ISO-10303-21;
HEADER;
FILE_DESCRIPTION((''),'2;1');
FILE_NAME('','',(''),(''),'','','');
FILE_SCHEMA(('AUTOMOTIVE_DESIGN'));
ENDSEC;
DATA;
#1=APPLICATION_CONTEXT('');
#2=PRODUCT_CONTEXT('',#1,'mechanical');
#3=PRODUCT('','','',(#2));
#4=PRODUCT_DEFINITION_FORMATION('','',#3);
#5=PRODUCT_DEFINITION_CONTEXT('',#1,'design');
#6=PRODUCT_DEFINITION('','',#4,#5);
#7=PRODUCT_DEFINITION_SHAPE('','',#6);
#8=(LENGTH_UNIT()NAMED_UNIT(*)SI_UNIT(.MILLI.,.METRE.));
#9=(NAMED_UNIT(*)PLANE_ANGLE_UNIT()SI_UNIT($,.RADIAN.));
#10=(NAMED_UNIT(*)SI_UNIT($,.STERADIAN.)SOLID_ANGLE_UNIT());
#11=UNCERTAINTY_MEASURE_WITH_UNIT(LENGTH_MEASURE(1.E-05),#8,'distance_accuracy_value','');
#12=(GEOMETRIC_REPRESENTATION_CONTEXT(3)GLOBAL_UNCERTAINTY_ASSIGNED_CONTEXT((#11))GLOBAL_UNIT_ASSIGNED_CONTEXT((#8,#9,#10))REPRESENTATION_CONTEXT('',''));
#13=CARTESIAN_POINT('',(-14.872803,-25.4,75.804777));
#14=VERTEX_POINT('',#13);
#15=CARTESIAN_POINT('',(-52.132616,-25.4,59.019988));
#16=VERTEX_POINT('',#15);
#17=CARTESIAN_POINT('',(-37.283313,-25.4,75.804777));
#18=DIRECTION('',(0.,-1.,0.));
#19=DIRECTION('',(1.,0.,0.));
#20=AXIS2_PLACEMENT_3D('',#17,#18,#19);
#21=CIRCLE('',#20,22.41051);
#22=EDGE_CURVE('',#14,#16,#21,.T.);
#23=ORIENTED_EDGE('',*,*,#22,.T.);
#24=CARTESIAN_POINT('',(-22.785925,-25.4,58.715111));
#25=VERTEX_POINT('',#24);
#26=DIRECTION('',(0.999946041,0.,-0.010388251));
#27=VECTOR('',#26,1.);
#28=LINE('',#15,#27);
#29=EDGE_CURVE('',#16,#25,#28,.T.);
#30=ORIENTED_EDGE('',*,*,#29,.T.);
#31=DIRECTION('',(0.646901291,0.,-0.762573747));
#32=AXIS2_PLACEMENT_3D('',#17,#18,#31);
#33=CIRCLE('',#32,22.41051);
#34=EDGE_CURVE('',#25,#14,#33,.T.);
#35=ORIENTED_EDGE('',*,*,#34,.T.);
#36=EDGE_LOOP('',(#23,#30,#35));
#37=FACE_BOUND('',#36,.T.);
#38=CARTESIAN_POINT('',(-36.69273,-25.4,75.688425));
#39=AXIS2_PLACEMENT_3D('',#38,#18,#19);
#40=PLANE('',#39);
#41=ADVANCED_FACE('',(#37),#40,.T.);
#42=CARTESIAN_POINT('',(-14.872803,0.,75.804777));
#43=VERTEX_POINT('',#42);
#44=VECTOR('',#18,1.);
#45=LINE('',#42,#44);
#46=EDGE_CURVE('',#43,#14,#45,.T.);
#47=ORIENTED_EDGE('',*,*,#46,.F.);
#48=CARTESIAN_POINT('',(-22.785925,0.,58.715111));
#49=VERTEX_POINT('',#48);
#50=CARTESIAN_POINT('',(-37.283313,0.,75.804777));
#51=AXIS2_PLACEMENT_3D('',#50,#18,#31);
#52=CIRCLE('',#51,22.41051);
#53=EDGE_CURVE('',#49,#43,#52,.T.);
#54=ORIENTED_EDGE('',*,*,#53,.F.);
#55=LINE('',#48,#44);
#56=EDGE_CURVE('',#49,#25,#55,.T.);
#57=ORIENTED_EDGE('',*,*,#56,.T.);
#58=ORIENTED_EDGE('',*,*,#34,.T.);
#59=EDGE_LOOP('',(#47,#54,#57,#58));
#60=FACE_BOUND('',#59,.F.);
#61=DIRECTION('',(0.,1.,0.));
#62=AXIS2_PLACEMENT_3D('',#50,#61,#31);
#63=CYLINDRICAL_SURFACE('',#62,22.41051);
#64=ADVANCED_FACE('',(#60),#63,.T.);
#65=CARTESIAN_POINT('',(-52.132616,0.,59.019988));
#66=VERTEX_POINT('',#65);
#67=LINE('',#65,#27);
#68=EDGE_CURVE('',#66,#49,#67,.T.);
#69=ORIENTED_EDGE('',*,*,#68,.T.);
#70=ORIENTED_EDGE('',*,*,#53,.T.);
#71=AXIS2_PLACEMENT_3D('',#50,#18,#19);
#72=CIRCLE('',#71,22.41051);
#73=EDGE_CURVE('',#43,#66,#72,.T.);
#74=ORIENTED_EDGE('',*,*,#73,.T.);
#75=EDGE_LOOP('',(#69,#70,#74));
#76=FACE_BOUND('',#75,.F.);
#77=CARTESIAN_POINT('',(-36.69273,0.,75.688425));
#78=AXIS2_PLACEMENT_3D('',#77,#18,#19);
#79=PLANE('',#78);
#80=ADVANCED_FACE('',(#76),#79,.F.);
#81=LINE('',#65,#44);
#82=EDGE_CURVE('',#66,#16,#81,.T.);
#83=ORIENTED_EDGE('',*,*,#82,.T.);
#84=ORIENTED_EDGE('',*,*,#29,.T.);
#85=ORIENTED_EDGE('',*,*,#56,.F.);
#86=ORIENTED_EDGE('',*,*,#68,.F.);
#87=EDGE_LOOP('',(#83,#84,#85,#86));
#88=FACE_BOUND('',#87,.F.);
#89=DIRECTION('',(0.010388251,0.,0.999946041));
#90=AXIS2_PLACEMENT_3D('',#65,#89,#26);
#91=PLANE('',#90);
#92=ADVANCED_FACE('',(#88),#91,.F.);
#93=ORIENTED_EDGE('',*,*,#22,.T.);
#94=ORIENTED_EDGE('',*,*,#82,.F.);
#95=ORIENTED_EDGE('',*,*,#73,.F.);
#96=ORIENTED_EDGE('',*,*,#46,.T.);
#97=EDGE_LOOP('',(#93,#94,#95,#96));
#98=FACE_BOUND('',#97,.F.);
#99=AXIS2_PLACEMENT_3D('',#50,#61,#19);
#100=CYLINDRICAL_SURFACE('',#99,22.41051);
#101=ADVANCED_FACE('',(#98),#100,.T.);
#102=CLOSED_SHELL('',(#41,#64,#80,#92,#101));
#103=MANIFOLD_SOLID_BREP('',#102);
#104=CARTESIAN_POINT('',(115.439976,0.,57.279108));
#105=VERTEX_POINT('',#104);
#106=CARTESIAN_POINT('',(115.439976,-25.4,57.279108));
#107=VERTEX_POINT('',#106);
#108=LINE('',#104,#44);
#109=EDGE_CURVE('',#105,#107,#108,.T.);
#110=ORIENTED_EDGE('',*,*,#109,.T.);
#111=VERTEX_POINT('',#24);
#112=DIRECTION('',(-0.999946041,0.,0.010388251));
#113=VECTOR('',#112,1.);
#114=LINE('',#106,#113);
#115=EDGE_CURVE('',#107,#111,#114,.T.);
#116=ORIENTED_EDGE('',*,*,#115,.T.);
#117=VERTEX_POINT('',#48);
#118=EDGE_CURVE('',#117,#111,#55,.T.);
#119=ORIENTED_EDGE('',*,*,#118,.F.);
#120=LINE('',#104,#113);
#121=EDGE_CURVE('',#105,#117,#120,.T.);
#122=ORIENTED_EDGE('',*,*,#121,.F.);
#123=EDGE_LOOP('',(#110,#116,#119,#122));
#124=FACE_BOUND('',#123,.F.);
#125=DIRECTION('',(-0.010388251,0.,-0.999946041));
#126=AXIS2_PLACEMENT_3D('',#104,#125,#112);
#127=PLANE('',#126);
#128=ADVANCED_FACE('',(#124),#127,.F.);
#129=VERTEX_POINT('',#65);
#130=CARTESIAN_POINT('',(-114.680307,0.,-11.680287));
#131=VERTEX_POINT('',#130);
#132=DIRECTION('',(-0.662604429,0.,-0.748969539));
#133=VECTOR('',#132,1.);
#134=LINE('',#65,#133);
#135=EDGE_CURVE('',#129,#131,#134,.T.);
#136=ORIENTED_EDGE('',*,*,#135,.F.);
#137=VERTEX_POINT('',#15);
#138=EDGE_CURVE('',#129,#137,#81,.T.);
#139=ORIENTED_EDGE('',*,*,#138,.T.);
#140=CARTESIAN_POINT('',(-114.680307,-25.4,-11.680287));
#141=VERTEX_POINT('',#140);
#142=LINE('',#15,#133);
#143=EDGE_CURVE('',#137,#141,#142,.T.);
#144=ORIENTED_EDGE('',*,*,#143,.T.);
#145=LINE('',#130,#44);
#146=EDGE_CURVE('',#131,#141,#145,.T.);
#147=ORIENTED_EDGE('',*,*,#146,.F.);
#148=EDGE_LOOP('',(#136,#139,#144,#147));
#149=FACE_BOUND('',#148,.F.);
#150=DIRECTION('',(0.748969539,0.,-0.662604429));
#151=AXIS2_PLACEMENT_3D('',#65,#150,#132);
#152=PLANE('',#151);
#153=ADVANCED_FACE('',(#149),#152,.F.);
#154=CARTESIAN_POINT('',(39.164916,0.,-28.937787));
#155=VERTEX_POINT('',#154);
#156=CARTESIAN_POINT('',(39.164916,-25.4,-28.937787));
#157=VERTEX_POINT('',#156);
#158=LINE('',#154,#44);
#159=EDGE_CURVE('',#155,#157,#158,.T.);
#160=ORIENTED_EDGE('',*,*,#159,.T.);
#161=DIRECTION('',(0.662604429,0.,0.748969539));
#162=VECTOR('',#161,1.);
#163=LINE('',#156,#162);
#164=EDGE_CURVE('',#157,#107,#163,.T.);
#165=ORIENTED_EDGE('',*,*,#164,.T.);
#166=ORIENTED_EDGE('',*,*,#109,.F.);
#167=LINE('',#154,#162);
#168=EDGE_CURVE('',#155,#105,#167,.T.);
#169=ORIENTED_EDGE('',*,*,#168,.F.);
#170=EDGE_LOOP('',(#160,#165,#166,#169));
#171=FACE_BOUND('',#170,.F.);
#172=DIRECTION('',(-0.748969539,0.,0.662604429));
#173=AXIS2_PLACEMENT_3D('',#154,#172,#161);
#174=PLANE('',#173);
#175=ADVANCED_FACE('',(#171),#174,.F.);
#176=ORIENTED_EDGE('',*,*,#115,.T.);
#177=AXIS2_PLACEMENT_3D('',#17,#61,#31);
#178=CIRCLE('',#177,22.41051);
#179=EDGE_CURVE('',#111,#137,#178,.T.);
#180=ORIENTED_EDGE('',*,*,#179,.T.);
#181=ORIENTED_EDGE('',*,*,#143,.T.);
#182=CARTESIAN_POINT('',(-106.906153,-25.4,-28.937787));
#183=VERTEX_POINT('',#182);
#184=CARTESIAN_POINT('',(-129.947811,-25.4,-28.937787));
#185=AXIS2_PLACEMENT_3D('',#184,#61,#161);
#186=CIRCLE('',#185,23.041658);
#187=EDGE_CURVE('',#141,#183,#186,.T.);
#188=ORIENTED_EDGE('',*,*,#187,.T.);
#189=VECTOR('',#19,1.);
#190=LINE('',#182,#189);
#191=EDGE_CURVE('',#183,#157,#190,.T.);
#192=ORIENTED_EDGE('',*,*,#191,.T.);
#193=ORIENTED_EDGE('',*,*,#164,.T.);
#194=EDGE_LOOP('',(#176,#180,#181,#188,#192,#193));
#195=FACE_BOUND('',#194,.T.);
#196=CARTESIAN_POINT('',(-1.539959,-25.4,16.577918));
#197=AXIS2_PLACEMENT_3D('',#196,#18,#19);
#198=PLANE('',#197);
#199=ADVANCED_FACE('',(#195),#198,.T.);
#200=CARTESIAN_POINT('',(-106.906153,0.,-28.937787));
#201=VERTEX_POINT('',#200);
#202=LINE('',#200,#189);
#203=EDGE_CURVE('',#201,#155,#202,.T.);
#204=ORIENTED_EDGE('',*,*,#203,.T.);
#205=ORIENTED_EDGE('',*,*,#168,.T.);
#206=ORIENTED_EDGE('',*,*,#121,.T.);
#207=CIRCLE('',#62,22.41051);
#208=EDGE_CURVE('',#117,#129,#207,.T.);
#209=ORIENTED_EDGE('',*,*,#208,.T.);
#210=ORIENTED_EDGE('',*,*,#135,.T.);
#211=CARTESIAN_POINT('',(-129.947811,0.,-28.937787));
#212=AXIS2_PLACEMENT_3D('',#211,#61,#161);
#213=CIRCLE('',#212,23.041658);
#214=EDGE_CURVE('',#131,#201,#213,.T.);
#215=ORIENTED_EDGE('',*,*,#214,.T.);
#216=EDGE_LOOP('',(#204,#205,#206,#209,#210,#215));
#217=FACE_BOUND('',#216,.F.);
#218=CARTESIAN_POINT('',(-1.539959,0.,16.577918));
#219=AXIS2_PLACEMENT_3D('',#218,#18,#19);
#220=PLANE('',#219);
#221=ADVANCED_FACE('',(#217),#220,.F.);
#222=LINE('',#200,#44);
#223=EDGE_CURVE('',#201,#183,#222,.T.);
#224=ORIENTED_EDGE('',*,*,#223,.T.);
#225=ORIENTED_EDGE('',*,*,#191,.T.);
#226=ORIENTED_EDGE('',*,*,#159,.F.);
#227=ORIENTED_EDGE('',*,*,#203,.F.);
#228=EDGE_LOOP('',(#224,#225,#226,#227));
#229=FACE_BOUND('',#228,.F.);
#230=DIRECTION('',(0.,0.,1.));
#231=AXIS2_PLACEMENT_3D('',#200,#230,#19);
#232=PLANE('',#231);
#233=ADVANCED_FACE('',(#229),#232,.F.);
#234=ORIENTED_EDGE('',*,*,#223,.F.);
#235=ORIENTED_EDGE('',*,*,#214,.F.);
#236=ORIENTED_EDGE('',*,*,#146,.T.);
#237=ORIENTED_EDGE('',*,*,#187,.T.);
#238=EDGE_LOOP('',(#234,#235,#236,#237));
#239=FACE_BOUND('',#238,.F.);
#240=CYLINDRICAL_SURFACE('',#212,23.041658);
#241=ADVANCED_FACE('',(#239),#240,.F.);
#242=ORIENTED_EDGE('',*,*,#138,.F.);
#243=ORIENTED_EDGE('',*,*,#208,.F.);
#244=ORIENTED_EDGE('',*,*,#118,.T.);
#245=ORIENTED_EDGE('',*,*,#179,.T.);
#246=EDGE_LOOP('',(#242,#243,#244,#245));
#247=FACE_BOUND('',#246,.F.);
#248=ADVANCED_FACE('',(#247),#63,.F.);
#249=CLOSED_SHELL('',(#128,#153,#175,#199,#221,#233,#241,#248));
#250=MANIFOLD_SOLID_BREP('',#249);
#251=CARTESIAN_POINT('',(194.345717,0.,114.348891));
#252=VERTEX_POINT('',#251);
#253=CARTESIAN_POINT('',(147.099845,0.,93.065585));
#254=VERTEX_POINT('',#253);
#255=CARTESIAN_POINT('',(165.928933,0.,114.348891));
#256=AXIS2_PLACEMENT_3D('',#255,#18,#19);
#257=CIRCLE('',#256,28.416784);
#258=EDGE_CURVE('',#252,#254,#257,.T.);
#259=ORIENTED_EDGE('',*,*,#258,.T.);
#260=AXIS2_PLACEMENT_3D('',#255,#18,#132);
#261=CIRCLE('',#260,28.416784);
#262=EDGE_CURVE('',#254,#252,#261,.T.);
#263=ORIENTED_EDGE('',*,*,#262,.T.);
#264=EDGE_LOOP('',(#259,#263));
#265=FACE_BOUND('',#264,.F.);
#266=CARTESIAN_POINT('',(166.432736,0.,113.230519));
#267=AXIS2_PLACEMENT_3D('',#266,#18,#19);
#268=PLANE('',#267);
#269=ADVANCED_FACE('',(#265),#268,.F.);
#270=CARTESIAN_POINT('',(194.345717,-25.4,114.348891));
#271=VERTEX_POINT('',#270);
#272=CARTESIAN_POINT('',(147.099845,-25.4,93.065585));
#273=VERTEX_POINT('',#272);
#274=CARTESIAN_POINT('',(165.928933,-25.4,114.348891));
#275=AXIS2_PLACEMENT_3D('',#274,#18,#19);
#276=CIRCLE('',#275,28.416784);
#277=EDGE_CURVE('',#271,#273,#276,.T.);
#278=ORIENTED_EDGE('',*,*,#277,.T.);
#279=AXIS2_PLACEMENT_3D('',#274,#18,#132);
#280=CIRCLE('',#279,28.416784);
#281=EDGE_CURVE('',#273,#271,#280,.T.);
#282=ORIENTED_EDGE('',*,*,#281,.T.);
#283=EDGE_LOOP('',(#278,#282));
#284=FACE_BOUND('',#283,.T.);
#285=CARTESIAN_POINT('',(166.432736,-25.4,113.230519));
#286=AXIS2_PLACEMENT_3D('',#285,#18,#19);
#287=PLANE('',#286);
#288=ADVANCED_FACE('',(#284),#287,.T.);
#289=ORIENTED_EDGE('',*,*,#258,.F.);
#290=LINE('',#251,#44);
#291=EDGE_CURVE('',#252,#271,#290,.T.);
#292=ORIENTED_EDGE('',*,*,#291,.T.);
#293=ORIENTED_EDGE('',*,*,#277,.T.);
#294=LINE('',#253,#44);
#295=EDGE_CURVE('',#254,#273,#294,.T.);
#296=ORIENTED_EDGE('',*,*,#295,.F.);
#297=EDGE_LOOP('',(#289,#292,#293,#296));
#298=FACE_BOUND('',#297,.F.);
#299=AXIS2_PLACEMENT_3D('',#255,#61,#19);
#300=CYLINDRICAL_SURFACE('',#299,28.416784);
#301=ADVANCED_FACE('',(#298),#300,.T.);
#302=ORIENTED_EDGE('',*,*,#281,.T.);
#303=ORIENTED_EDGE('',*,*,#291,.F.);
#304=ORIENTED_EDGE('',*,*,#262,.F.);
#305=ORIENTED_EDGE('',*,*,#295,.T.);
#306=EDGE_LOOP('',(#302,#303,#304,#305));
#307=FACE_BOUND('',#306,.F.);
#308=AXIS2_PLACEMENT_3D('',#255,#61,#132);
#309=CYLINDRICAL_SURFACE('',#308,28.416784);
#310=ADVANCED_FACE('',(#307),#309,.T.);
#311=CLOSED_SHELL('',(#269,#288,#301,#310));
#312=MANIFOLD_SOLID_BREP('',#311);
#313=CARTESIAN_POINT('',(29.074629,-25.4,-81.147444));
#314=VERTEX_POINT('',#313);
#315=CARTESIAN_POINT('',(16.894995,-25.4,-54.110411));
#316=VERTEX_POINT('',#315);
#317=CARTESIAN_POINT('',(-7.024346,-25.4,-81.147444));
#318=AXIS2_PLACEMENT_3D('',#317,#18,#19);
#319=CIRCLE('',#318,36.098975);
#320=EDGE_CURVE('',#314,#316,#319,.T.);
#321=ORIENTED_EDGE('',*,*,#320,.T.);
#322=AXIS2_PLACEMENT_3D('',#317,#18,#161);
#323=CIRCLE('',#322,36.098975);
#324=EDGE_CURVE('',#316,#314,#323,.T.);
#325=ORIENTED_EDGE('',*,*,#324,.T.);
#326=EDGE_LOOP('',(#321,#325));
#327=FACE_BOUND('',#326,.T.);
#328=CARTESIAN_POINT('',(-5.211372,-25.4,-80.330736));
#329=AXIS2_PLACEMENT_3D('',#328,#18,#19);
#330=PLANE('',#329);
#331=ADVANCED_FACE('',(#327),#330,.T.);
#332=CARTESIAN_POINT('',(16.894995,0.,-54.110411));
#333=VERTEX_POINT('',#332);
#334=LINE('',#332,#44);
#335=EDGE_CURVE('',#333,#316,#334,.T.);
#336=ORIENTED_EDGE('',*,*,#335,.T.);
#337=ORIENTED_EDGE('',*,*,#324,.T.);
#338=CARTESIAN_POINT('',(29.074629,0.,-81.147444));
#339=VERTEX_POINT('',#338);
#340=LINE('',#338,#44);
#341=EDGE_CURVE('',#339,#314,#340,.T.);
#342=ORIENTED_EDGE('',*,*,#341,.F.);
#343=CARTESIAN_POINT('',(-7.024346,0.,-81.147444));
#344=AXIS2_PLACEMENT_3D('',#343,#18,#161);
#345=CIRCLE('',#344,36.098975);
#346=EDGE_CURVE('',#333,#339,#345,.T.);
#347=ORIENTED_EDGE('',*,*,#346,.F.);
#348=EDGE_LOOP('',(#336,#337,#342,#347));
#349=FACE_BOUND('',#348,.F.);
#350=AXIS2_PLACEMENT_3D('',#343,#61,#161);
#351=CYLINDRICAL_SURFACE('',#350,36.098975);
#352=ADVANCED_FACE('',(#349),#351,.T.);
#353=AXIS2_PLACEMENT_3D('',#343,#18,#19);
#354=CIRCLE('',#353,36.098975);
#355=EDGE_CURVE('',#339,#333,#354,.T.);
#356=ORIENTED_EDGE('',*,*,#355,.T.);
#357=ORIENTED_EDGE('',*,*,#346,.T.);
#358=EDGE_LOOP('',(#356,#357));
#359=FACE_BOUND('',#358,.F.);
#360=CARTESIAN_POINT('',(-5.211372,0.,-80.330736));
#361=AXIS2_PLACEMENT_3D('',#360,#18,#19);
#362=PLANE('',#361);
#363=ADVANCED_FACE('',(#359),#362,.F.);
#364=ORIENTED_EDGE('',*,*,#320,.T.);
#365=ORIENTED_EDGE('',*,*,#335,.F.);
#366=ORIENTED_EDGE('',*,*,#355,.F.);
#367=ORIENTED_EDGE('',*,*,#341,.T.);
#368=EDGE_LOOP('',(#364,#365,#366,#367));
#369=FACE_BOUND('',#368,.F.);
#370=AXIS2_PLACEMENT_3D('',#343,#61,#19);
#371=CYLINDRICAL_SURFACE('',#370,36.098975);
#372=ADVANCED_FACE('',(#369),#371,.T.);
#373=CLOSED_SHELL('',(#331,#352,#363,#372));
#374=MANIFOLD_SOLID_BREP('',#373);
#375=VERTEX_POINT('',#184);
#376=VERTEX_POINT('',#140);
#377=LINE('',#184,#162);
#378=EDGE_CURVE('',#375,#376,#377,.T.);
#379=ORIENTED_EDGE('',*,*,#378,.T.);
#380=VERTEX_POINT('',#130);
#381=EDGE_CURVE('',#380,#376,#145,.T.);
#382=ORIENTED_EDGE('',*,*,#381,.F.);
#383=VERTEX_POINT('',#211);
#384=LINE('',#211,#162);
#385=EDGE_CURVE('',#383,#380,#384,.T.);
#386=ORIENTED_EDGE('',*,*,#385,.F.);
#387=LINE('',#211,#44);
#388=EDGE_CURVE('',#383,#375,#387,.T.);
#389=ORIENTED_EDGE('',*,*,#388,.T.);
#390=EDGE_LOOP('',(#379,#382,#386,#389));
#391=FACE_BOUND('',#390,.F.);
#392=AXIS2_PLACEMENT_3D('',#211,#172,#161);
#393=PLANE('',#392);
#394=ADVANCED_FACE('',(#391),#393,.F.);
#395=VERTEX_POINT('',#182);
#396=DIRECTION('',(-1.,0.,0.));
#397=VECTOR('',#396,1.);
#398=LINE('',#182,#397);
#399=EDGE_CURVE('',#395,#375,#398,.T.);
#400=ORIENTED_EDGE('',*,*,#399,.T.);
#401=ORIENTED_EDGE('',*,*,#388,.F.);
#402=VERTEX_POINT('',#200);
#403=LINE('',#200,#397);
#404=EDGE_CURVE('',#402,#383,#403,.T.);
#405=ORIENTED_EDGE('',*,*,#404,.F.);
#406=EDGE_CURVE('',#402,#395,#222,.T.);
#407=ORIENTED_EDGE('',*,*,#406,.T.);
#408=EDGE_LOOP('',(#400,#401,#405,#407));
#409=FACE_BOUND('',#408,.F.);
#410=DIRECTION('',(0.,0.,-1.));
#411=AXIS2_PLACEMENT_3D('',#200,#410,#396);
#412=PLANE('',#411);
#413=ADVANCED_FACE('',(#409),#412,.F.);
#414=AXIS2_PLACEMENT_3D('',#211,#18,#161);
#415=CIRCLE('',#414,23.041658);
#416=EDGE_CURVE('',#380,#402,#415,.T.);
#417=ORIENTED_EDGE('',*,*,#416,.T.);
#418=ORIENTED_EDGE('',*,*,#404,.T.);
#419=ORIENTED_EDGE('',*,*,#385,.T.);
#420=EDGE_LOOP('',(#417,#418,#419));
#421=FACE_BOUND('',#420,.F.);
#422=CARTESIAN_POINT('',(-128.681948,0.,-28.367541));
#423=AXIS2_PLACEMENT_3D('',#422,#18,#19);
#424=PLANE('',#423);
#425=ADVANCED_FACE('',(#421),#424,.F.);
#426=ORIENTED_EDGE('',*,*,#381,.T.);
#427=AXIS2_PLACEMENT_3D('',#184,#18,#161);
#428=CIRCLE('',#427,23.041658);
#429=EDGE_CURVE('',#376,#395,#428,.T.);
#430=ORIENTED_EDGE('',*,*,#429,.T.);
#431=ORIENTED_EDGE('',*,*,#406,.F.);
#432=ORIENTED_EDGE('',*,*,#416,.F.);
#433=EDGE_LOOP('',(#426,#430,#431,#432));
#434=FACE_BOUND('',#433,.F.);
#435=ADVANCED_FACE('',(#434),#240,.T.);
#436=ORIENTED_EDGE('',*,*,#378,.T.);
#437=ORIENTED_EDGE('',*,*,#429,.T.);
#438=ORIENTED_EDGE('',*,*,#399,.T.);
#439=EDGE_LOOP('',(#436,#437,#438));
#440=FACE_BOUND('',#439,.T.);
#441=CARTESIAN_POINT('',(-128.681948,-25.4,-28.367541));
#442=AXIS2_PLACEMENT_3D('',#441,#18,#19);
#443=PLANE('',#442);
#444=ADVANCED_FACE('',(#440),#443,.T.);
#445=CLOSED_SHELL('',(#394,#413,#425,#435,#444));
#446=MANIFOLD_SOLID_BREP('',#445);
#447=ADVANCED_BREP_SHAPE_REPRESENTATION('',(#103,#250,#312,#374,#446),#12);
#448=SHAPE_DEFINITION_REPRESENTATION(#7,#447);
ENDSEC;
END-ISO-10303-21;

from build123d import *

# Parameters (mm, degrees)
F1_DEPTH = 25.4


with BuildPart() as f1:
    # F0 (on Front) → F1 (new body)
    with BuildSketch(Plane.XZ):
        with BuildLine():
            Line((-106.9061532036, -28.9377868176), (-129.9478113651, -28.9377868176))
            Line((-129.9478113651, -28.9377868176), (-114.6803066145, -11.6802867227))
            ThreePointArc((-114.6803066145, -11.6802867227), (-150.9562220175, -38.4016492793), (-106.9061532036, -28.9377868176))
        make_face()
    extrude(amount=F1_DEPTH)


with BuildPart() as f1b:
    # F0 (on Front) → F1, piece 2 (new body)
    with BuildSketch(Plane.XZ):
        with BuildLine():
            ThreePointArc((194.3457171495, 114.3488910523), (154.2573533816, 140.2581148478), (147.0998454016, 93.0655850704))
            ThreePointArc((147.0998454016, 93.0655850704), (177.6005119431, 88.4396672568), (194.3457171495, 114.3488910523))
        make_face()
    extrude(amount=F1_DEPTH)


with BuildPart() as f1c:
    # F0 (on Front) → F1, piece 3 (new body)
    with BuildSketch(Plane.XZ):
        with BuildLine():
            ThreePointArc((29.0746289373, -81.1474440853), (25.8891745461, -66.3205712619), (16.8949946285, -54.1104113526))
            ThreePointArc((16.8949946285, -54.1104113526), (-39.9378668388, -95.9743169088), (29.0746289373, -81.1474440853))
        make_face()
    extrude(amount=F1_DEPTH)


with BuildPart() as f1d:
    # F0 (on Front) → F1, piece 4 (new body)
    with BuildSketch(Plane.XZ):
        with BuildLine():
            Line((-52.1326156147, 59.019988207), (-114.6803066145, -11.6802867227))
            ThreePointArc((-114.6803066145, -11.6802867227), (-108.9394007128, -19.4739243558), (-106.9061532036, -28.9377868176))
            Line((-106.9061532036, -28.9377868176), (39.1649156809, -28.9377868176))
            Line((39.1649156809, -28.9377868176), (115.4399755566, 57.2791081198))
            Line((115.4399755566, 57.2791081198), (-22.7859247841, 58.7151109634))
            ThreePointArc((-22.7859247841, 58.7151109634), (-37.5161185324, 53.3954768475), (-52.1326156147, 59.019988207))
        make_face()
    extrude(amount=F1_DEPTH)


with BuildPart() as f1e:
    # F0 (on Front) → F1, piece 5 (new body)
    with BuildSketch(Plane.XZ):
        with BuildLine():
            ThreePointArc((-14.8728026772, 75.8047774434), (-46.4879444812, 96.2377337264), (-52.1326156147, 59.019988207))
            Line((-52.1326156147, 59.019988207), (-22.7859247841, 58.7151109634))
            ThreePointArc((-22.7859247841, 58.7151109634), (-16.9470788229, 66.3883794873), (-14.8728026772, 75.8047774434))
        make_face()
    extrude(amount=F1_DEPTH)


solid = Compound([f1.part, f1b.part, f1c.part, f1d.part, f1e.part])
